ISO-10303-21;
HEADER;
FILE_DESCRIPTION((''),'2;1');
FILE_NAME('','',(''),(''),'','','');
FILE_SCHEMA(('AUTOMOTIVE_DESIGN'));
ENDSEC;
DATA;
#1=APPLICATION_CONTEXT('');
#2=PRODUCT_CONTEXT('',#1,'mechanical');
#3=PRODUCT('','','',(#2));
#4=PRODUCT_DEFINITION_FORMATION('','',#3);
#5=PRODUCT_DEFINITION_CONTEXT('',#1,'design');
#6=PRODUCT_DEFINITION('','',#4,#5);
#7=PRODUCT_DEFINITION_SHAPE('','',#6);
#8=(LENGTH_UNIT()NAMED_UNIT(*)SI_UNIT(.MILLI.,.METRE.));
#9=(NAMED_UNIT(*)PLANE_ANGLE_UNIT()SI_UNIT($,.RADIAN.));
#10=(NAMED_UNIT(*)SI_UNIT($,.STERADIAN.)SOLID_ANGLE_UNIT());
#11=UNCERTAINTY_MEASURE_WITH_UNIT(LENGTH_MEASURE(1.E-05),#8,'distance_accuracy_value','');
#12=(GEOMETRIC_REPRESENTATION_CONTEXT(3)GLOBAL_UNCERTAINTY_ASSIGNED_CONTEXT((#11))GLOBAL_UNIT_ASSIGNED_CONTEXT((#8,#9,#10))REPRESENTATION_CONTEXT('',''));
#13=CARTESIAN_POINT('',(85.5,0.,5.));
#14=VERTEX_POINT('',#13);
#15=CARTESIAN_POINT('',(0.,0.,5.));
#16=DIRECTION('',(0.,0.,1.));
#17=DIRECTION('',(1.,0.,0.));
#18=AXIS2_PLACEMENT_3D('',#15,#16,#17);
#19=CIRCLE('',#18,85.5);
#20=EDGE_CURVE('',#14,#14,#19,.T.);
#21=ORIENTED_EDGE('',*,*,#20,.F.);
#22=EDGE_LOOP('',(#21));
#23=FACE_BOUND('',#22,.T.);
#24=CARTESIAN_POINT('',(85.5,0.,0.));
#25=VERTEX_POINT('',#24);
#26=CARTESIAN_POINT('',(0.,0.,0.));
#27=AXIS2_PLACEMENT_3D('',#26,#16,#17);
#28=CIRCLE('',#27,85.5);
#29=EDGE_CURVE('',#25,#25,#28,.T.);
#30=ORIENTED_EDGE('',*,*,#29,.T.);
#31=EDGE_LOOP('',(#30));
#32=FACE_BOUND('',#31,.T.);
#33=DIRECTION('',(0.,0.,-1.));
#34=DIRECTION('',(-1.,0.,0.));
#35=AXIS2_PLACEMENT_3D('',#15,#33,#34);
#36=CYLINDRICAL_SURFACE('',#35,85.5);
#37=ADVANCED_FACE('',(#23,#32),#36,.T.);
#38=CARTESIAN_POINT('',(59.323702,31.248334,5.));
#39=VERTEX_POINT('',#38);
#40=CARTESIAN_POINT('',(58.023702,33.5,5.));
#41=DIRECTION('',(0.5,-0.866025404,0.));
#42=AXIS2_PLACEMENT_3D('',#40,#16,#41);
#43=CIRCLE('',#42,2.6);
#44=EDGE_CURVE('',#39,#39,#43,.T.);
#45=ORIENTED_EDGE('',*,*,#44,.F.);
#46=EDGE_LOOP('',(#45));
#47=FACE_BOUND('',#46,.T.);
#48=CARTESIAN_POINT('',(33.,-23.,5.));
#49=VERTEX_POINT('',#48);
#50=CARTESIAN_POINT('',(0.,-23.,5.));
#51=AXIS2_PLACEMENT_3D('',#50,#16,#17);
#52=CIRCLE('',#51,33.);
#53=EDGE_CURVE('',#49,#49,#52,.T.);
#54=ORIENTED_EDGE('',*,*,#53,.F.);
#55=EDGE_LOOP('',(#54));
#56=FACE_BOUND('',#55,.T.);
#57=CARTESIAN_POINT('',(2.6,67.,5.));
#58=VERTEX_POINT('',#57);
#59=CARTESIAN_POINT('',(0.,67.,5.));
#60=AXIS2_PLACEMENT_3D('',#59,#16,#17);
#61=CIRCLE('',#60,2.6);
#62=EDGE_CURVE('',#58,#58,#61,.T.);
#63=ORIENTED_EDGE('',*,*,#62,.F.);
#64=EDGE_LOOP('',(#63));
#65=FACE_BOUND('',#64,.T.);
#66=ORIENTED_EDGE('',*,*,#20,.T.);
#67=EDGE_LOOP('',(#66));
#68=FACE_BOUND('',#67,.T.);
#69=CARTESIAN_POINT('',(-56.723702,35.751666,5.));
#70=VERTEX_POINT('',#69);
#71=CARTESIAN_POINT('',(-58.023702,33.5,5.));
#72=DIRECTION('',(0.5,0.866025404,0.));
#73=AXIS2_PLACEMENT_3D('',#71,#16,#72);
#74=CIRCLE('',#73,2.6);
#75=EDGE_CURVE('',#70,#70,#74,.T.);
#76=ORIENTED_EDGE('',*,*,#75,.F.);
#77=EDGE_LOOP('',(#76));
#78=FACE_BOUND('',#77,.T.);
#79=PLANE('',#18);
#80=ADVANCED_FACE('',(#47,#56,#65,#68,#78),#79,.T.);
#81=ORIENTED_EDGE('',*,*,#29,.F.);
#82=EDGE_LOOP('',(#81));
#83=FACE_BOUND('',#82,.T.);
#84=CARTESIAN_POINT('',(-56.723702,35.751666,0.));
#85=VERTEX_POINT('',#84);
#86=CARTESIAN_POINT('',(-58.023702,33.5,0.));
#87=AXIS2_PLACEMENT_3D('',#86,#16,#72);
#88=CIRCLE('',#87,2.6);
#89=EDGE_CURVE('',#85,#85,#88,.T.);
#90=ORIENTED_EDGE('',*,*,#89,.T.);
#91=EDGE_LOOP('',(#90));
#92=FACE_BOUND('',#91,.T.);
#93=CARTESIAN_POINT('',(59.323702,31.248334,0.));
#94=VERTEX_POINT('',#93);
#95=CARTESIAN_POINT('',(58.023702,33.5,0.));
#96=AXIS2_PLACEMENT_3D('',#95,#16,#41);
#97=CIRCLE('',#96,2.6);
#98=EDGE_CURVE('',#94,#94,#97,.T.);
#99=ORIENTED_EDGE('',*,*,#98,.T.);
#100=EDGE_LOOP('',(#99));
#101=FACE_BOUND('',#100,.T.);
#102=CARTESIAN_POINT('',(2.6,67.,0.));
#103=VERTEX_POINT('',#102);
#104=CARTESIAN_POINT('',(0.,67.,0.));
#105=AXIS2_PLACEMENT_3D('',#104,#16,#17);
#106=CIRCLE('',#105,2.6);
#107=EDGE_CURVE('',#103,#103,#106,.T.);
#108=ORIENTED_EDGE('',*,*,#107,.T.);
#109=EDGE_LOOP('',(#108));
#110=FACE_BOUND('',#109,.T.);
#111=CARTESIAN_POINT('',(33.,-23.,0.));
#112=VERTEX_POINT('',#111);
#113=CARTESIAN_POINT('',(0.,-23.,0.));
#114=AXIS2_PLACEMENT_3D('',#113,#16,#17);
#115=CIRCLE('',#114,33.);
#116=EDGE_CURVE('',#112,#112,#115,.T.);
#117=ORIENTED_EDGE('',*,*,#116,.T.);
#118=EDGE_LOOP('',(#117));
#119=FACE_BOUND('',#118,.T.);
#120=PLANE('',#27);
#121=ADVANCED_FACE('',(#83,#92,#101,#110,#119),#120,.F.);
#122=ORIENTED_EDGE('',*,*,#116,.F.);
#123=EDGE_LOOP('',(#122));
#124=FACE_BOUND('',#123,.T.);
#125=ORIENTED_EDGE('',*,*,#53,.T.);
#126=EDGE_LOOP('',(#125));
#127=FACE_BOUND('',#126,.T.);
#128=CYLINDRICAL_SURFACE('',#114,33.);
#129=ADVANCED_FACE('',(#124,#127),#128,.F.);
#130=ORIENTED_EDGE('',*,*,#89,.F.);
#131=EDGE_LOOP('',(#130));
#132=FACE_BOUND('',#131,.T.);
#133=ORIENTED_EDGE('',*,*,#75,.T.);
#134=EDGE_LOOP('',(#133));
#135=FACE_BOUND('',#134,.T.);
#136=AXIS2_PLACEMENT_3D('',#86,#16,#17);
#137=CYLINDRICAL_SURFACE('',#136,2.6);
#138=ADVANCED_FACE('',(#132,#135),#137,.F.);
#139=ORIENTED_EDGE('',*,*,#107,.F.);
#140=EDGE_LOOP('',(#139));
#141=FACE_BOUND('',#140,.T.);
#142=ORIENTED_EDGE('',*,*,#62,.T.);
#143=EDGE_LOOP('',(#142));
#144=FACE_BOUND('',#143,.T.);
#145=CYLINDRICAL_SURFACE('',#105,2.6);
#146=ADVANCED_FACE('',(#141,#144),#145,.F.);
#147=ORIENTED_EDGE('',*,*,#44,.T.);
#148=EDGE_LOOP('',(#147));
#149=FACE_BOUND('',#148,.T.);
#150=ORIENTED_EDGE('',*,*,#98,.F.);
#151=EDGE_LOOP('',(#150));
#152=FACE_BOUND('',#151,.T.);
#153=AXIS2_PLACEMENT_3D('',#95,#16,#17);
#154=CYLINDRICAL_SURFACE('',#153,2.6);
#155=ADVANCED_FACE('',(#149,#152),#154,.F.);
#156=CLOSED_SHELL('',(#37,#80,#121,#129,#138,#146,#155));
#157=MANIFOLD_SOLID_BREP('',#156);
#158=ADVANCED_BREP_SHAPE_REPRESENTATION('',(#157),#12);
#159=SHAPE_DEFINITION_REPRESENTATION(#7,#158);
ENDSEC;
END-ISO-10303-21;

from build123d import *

# Parameters (mm, degrees)
SKETCH2_R                   = 85.5
BOSS_EXTRUDE1_DEPTH         = 5
SKETCH3_R                   = 33
CUT_EXTRUDE1_DEPTH          = 122.018593613
SKETCH4_R                   = 2.6
CUT_EXTRUDE2_DEPTH          = 122.018593613
CIRPATTERN3_COUNT           = 2
CIRPATTERN3_ANGLE           = 60
CIRPATTERN4_COPY_1_SKETCH_R = 2.6
CIRPATTERN4_COPY_1_DEPTH    = 122.018593613
CIRPATTERN4_COPY_2_SKETCH_R = 2.6
CIRPATTERN4_COPY_2_DEPTH    = 122.018593613


with BuildPart() as part:
    # Sketch2 → Boss-Extrude1 (new body)
    with BuildSketch(Plane.XY):
        Circle(SKETCH2_R)
    extrude(amount=BOSS_EXTRUDE1_DEPTH)

    # Sketch3 → Cut-Extrude1 (cut, through all)
    with BuildSketch(Plane.XY.offset(5)):
        with Locations((0, -23)):
            Circle(SKETCH3_R)
    extrude(amount=-CUT_EXTRUDE1_DEPTH, mode=Mode.SUBTRACT)

    # Sketch4 → Cut-Extrude2 (cut, through all)
    with BuildSketch(Plane.XY.offset(5)):
        with Locations((0, 67)):
            Circle(SKETCH4_R)
    cut_extrude2 = extrude(amount=-CUT_EXTRUDE2_DEPTH, mode=Mode.SUBTRACT)

    # CirPattern3: Cut-Extrude2 ×2 about axis
    cirpattern3_axis = Axis((0, 0, 5), (0, 0, 1))
    for i in range(1, CIRPATTERN3_COUNT):
        add(cut_extrude2.rotate(cirpattern3_axis, i * CIRPATTERN3_ANGLE / (CIRPATTERN3_COUNT - 1)), mode=Mode.SUBTRACT)

    # CirPattern4 copy 1 sketch → CirPattern4 copy 1 (cut, through all)
    with BuildSketch(Plane.XY.offset(5)):
        with Locations((0, 67)):
            Circle(CIRPATTERN4_COPY_1_SKETCH_R)
    extrude(amount=-CIRPATTERN4_COPY_1_DEPTH, mode=Mode.SUBTRACT)

    # CirPattern4 copy 2 sketch → CirPattern4 copy 2 (cut, through all)
    with BuildSketch(Plane(origin=(0, 0, 5), x_dir=(0.4999999999999978, -0.8660254037844399, 0), z_dir=(0, 0, 1))):
        with Locations((0, 67)):
            Circle(CIRPATTERN4_COPY_2_SKETCH_R)
    extrude(amount=-CIRPATTERN4_COPY_2_DEPTH, mode=Mode.SUBTRACT)


solid = part.part
